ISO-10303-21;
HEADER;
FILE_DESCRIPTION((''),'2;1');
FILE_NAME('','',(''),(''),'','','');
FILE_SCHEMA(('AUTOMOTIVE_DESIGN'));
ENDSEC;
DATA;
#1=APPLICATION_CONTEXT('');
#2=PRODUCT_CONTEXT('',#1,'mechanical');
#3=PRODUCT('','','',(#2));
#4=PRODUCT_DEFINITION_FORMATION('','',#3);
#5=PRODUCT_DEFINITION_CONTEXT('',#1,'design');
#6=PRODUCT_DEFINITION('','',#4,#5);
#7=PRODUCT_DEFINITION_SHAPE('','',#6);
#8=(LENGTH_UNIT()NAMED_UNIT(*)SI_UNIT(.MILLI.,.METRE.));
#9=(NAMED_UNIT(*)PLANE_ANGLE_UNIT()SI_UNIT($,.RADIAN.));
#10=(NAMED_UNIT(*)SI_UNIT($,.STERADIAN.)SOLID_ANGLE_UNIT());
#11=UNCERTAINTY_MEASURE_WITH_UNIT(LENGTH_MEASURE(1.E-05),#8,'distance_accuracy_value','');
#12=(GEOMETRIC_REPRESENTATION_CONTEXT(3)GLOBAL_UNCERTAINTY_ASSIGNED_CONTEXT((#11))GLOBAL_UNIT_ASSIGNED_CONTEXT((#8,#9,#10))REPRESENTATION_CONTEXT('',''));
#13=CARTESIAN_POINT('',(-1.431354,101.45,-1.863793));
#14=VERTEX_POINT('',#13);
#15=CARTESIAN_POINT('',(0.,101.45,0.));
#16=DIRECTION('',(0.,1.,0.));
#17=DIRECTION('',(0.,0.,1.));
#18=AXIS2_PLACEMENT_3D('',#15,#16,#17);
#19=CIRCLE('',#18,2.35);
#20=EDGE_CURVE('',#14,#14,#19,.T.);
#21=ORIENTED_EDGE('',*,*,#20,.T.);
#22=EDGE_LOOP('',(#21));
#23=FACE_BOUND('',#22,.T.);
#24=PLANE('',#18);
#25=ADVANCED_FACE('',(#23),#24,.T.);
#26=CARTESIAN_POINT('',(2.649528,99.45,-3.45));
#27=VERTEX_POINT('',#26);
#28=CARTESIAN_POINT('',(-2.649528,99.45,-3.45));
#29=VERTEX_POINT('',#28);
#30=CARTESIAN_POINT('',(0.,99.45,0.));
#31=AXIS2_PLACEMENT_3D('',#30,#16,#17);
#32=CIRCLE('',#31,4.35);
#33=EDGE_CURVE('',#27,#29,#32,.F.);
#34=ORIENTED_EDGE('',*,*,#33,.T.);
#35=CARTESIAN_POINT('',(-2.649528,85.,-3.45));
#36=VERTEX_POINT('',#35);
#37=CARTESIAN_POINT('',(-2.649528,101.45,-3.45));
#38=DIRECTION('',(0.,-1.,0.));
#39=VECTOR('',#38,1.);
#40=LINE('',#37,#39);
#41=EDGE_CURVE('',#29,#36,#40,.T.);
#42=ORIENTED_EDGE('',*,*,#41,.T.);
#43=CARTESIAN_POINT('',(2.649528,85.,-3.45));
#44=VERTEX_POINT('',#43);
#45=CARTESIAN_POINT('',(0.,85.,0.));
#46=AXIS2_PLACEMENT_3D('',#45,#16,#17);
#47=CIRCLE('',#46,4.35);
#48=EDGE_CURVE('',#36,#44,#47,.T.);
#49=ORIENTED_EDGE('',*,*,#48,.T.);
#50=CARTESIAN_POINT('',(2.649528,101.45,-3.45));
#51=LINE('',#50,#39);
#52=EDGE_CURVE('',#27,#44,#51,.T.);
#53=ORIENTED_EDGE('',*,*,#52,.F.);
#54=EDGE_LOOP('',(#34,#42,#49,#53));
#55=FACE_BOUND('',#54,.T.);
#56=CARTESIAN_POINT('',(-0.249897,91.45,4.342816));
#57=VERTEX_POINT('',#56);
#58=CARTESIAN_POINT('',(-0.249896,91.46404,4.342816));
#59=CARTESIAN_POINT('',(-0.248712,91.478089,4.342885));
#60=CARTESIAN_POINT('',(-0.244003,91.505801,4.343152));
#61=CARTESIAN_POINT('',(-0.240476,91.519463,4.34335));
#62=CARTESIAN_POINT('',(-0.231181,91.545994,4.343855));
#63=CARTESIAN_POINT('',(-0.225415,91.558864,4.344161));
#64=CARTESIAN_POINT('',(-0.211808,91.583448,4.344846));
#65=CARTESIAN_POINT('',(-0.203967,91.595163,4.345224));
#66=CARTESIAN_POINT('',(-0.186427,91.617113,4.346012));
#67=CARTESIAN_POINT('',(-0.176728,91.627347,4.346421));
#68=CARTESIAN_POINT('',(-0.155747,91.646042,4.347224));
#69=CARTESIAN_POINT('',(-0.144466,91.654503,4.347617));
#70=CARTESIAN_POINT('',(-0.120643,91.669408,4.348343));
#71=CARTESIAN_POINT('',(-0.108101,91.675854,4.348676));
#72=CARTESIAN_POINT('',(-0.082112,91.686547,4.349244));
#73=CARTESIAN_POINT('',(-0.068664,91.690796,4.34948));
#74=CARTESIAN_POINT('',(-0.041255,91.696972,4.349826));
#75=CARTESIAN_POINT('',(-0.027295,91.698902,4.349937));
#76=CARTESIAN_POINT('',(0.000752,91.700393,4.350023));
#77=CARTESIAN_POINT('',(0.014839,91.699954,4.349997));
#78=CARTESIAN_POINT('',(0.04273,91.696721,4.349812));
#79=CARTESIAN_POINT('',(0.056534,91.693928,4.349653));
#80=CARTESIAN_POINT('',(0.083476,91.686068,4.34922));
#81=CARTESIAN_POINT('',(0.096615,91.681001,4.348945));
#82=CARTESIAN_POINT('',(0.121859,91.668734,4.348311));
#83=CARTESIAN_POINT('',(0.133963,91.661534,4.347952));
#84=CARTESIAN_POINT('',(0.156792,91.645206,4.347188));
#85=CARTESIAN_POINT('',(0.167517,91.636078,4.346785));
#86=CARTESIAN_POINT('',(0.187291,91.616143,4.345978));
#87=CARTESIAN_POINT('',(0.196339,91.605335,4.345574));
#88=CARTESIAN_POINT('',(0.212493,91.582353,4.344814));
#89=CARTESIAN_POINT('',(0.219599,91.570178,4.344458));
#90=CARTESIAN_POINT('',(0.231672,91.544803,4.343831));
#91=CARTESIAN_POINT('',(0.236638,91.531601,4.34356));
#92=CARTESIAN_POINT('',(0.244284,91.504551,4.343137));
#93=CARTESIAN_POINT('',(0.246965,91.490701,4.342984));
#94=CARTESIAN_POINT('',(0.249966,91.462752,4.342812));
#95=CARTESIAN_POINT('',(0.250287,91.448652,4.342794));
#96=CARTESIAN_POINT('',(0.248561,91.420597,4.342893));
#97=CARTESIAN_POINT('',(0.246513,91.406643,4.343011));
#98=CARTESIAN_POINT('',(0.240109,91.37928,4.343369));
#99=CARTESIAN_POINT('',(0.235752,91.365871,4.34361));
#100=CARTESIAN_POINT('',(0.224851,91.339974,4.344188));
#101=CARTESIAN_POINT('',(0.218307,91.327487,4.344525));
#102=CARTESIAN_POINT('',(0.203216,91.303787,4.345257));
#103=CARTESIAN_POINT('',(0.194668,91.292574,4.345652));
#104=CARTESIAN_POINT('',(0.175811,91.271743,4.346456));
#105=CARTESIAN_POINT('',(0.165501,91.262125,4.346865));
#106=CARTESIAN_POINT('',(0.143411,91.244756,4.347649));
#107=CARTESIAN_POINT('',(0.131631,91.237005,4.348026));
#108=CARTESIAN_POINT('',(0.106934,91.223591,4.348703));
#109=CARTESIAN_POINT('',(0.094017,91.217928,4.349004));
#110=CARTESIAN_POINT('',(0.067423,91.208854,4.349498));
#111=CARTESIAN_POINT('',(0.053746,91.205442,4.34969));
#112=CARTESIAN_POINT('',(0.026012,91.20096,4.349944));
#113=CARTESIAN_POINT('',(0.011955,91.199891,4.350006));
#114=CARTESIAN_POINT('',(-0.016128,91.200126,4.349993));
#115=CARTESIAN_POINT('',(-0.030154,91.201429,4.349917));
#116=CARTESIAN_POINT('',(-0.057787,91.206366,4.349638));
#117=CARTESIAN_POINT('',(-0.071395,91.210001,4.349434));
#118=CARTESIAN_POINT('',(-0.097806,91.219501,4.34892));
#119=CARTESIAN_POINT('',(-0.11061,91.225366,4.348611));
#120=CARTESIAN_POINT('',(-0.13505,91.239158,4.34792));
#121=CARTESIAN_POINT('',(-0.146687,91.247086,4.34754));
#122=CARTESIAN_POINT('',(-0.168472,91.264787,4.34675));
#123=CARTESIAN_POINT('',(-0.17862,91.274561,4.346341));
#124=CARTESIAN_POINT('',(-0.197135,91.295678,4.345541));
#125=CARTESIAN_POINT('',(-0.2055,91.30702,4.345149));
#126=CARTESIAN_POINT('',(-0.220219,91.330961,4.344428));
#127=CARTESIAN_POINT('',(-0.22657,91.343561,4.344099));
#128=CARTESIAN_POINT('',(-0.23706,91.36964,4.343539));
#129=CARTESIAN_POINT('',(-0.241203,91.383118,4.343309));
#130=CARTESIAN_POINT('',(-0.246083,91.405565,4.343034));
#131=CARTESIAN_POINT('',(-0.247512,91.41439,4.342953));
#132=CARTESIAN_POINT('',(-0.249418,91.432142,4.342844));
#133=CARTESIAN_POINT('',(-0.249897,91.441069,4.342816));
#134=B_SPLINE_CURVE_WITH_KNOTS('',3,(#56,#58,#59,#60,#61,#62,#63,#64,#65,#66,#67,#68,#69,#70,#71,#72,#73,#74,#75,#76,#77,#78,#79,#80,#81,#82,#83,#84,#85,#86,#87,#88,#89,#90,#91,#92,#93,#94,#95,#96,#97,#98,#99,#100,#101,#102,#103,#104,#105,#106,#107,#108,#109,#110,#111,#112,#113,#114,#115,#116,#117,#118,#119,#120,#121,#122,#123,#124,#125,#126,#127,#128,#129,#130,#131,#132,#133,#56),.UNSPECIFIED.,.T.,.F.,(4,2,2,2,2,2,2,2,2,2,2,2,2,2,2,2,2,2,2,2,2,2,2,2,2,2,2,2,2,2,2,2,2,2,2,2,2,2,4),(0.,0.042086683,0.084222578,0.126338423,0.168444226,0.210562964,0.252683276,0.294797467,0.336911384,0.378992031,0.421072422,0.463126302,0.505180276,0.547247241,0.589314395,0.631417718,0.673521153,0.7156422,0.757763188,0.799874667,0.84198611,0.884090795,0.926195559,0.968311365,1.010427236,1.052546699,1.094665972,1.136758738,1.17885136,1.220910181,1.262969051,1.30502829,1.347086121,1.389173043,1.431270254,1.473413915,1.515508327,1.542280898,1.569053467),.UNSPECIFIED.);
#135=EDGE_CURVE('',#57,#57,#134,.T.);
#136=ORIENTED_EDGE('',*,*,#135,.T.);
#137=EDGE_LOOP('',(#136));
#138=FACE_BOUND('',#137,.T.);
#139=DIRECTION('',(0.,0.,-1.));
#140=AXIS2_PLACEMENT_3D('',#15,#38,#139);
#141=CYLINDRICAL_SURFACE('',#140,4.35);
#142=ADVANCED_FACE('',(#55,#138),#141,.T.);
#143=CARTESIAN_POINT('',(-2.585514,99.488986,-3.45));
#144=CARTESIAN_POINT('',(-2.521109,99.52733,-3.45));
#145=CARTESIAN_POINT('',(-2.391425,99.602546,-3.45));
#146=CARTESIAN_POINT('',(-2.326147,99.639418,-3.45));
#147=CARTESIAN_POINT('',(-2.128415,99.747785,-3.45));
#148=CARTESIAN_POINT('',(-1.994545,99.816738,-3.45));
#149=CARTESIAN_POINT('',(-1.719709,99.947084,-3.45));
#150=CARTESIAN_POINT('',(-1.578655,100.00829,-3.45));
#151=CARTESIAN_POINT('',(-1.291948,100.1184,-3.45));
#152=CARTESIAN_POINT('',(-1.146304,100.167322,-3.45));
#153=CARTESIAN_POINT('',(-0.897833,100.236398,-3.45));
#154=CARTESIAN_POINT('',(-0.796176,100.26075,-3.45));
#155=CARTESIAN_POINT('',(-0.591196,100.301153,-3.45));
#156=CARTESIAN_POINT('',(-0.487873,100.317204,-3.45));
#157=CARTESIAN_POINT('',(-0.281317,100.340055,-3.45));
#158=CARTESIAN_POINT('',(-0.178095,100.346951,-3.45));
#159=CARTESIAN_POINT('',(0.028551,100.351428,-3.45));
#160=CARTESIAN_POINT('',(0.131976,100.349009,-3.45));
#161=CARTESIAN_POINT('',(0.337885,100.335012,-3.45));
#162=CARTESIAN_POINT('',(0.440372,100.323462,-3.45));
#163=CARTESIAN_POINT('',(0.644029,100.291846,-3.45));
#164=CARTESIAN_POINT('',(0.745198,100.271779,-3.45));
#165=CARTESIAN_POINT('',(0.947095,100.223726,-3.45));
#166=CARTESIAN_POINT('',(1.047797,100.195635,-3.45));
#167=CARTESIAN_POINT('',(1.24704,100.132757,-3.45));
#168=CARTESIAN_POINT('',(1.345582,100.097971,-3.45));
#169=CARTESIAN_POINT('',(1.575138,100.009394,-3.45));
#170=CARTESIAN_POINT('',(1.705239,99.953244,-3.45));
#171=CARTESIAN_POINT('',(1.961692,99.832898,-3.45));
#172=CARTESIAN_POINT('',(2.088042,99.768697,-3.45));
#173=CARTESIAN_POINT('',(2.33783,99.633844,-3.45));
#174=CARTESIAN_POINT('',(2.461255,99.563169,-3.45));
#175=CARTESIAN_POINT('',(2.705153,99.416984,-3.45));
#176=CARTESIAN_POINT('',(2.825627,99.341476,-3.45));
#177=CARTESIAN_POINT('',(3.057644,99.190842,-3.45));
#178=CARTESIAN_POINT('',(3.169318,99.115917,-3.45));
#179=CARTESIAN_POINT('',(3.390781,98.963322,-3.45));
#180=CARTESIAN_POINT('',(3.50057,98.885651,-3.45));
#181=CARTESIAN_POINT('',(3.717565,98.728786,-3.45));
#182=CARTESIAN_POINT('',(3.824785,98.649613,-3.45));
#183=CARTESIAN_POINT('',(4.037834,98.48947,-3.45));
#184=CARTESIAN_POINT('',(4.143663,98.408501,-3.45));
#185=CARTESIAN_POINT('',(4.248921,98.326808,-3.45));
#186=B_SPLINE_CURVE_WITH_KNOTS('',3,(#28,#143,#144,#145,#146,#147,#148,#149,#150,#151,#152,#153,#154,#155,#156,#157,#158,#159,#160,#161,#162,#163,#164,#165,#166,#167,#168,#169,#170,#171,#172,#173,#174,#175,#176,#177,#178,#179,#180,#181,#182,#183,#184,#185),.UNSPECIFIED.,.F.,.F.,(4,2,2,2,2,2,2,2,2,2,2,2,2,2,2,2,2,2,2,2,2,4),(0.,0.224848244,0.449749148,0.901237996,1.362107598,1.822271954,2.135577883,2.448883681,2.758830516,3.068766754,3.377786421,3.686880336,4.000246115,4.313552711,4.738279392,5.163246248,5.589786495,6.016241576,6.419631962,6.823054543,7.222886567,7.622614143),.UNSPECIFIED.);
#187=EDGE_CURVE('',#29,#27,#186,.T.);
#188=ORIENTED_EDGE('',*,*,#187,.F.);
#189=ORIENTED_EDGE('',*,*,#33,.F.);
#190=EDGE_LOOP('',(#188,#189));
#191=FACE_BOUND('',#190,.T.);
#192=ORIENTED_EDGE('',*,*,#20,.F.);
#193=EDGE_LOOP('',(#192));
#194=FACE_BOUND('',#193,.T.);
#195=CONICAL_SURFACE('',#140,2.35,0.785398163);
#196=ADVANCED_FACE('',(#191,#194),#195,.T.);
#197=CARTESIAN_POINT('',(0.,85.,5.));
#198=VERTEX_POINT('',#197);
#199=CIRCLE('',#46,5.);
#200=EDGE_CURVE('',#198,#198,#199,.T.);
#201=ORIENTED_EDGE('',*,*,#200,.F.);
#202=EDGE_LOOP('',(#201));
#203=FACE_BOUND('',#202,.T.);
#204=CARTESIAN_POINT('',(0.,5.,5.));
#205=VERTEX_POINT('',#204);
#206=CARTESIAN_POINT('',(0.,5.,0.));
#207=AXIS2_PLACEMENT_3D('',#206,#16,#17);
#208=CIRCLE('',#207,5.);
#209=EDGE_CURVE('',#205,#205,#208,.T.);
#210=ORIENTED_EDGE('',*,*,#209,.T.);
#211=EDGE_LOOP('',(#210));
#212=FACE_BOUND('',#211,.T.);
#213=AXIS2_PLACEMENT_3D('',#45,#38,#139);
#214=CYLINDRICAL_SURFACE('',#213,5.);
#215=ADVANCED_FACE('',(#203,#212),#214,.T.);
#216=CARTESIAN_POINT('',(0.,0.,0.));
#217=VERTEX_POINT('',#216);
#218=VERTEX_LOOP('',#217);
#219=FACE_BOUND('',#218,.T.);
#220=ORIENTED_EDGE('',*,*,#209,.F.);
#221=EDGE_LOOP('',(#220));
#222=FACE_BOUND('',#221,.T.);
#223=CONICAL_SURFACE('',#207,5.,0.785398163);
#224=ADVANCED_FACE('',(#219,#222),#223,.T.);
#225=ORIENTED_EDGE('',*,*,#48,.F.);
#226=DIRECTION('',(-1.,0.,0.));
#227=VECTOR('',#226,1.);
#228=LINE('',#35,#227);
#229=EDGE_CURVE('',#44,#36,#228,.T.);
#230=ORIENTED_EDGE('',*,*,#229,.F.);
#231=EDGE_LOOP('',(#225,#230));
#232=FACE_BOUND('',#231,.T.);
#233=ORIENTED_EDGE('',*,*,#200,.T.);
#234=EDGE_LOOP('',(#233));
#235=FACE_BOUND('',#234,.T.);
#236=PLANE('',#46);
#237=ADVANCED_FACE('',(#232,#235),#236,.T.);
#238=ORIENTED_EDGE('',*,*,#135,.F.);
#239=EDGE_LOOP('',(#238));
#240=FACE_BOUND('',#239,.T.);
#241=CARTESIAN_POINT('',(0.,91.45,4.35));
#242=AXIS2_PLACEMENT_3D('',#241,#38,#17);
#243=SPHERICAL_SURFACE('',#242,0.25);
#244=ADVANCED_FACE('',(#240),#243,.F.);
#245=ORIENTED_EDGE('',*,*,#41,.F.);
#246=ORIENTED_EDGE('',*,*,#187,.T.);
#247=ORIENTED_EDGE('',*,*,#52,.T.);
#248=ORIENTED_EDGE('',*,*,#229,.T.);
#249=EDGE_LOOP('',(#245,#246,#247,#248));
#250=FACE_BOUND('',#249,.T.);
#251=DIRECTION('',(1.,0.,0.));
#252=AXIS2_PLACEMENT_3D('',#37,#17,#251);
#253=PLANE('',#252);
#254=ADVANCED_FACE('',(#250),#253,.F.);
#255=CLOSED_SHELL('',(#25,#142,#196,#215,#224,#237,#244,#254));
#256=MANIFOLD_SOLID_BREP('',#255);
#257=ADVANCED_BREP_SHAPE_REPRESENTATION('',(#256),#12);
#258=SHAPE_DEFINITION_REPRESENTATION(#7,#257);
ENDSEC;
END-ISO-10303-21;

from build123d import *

# Parameters (mm, degrees)
SKETCH1_R           = 5
BOSS_EXTRUDE1_DEPTH = 85
CHAMFER1_SIZE       = 5
BOSS_EXTRUDE2_DEPTH = 16.45


with BuildPart() as part:
    # Sketch1 → Boss-Extrude1 (new body)
    with BuildSketch(Plane(origin=(0, 0, 0), x_dir=(1, 0, 0), z_dir=(0, 1, 0))):
        with Locations(Location((0, 0, 0), (0, 0, 270))):
            Circle(SKETCH1_R)
    extrude(amount=BOSS_EXTRUDE1_DEPTH)

    # Chamfer1
    chamfer1_edges = [part.edges().sort_by_distance(p)[0] for p in [
        (0, 0, -5),
    ]]
    chamfer(chamfer1_edges, length=CHAMFER1_SIZE)

    # Sketch2 → Boss-Extrude2 (add)
    with BuildSketch(Plane(origin=(0, 85, 0), x_dir=(1, 0, 0), z_dir=(0, 1, 0))):
        with BuildLine():
            Line((-2.64952826, 3.45), (2.64952826, 3.45))
            ThreePointArc((2.64952826, 3.45), (0, -4.35), (-2.64952826, 3.45))
        make_face()
    extrude(amount=BOSS_EXTRUDE2_DEPTH)

    # Chamfer2: read off the stored shape, not the designer's step
    # Chamfer2 outline → Chamfer2 (revolve, cut)
    with BuildSketch(Plane.XY):
        Polygon((4.35, 101.45), (2.35, 101.45), (4.35, 99.45), align=None)
    revolve(axis=Axis((0, 0, 0), (0, 1, 0)), mode=Mode.SUBTRACT)

    # Sketch3 → Cut-Revolve1 (revolve, cut)
    with BuildSketch(Plane(origin=(0, 0, 0), x_dir=(0, 0, -1), z_dir=(1, 0, 0))):
        with BuildLine():
            Line((-4.35, 91.2), (-4.35, 91.7))
            ThreePointArc((-4.35, 91.7), (-4.1, 91.45), (-4.35, 91.2))
        make_face()
    revolve(axis=Axis((0, 91.2, 4.35), (0, 1, 0)), mode=Mode.SUBTRACT)


solid = part.part
